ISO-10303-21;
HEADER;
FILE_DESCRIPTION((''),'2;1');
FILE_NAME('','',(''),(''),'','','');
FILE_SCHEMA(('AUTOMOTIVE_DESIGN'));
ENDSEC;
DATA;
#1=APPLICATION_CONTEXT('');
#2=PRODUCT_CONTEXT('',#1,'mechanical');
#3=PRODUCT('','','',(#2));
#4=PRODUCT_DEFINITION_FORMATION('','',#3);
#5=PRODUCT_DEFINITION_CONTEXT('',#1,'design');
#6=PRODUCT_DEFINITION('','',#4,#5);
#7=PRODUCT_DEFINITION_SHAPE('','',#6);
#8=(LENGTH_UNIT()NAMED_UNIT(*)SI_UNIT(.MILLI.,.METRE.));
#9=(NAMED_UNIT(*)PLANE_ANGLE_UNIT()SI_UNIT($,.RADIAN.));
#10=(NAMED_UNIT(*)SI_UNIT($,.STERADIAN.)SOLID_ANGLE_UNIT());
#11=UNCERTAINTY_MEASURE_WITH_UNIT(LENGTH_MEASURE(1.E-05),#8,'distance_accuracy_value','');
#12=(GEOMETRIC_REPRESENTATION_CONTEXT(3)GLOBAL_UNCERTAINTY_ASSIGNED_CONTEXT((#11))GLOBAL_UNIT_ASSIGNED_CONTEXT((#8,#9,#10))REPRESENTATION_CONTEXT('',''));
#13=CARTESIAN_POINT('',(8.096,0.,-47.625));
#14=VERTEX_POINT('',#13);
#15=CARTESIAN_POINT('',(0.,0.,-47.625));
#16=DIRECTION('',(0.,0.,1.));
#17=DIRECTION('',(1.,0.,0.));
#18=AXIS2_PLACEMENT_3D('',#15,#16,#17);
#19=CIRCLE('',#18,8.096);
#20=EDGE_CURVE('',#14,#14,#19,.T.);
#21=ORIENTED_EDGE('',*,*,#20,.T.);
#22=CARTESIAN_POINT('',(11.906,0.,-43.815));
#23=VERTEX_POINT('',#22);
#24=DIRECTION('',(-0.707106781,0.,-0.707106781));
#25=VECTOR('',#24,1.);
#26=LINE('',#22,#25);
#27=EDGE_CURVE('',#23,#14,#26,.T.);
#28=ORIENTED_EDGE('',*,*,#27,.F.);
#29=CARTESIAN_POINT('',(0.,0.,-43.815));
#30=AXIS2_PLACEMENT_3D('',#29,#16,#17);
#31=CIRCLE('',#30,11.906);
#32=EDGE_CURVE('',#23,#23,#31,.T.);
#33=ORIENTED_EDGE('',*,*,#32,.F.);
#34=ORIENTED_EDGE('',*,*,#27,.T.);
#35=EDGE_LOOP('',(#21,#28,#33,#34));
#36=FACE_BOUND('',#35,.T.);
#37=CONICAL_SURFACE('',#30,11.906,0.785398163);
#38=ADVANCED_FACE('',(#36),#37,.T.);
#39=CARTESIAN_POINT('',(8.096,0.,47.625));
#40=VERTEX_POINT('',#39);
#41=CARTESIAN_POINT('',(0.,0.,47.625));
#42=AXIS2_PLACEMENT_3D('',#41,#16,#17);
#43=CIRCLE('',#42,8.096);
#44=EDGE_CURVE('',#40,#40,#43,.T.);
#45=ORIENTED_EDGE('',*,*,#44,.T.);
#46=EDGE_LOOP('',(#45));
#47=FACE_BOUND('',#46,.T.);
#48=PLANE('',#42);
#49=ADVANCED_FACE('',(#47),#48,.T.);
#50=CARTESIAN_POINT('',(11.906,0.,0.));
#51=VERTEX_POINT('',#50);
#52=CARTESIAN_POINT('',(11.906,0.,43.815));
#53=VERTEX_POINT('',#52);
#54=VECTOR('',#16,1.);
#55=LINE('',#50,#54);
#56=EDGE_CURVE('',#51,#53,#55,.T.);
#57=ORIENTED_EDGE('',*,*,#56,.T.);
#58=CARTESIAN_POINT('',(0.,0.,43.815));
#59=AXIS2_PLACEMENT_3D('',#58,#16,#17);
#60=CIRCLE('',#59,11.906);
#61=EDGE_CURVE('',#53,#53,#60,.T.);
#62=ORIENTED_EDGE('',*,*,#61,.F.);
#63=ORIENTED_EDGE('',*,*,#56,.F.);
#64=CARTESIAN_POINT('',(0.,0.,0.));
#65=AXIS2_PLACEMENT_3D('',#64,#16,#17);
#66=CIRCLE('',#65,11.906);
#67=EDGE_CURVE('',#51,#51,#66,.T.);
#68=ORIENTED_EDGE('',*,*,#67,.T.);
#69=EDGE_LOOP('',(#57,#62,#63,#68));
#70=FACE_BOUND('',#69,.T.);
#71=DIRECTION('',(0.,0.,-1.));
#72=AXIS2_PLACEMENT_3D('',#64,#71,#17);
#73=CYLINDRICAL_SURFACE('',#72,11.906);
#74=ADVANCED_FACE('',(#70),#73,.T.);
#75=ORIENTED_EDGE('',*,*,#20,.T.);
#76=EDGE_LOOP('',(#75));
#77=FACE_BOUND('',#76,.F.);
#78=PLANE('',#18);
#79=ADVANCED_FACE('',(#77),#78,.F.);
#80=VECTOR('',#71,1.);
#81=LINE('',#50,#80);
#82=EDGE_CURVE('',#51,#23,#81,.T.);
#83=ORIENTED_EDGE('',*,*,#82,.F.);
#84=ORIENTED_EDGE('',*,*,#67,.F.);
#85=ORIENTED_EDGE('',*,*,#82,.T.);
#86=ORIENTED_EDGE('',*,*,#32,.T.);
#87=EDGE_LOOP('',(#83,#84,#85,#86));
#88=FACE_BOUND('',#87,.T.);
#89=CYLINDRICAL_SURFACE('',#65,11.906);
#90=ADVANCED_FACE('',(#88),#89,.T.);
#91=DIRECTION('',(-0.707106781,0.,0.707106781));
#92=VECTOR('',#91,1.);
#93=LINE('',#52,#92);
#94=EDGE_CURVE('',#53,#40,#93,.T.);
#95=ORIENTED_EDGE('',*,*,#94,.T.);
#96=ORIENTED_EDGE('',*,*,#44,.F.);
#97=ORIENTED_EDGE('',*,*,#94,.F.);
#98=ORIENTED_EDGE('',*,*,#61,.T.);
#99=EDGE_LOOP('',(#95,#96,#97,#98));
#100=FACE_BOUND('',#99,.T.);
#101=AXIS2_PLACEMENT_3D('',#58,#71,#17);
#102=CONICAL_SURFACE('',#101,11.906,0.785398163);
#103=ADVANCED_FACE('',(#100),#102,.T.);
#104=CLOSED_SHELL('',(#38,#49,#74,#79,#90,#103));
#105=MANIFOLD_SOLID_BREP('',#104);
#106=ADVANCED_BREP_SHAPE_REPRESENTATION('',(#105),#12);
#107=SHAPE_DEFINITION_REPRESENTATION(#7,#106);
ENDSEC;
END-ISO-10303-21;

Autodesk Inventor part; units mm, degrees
ref_plane "YZ Plane" through (0, 0, 0) normal (1, 0, 0) x (0, 1, 0)
ref_plane "XZ Plane" through (0, 0, 0) normal (0, 1, 0) x (-1, 0, 0)
ref_plane "XY Plane" through (0, 0, 0) normal (0, 0, 1) x (1, 0, 0)
sketch "Sketch1" plane through (0, 0, 0) normal (0, 0, 1) x (1, 0, 0)
  circle A0 centre (0, 0) radius 1.1906
  dimension "d0" = 2.3813
extrude "Extrusion1" add sketch "Sketch1" along normal mid plane 9.525
chamfer "Chamfer1" distance 0.381 angle 45 2 edges at (-1.1906, 0, -4.7625) (-1.1906, 0, 4.7625)
scale "Scale1" factors (10, 10, 10) then translate (0, 0, 0) bodies 1
properties part number "hex axle pin"
